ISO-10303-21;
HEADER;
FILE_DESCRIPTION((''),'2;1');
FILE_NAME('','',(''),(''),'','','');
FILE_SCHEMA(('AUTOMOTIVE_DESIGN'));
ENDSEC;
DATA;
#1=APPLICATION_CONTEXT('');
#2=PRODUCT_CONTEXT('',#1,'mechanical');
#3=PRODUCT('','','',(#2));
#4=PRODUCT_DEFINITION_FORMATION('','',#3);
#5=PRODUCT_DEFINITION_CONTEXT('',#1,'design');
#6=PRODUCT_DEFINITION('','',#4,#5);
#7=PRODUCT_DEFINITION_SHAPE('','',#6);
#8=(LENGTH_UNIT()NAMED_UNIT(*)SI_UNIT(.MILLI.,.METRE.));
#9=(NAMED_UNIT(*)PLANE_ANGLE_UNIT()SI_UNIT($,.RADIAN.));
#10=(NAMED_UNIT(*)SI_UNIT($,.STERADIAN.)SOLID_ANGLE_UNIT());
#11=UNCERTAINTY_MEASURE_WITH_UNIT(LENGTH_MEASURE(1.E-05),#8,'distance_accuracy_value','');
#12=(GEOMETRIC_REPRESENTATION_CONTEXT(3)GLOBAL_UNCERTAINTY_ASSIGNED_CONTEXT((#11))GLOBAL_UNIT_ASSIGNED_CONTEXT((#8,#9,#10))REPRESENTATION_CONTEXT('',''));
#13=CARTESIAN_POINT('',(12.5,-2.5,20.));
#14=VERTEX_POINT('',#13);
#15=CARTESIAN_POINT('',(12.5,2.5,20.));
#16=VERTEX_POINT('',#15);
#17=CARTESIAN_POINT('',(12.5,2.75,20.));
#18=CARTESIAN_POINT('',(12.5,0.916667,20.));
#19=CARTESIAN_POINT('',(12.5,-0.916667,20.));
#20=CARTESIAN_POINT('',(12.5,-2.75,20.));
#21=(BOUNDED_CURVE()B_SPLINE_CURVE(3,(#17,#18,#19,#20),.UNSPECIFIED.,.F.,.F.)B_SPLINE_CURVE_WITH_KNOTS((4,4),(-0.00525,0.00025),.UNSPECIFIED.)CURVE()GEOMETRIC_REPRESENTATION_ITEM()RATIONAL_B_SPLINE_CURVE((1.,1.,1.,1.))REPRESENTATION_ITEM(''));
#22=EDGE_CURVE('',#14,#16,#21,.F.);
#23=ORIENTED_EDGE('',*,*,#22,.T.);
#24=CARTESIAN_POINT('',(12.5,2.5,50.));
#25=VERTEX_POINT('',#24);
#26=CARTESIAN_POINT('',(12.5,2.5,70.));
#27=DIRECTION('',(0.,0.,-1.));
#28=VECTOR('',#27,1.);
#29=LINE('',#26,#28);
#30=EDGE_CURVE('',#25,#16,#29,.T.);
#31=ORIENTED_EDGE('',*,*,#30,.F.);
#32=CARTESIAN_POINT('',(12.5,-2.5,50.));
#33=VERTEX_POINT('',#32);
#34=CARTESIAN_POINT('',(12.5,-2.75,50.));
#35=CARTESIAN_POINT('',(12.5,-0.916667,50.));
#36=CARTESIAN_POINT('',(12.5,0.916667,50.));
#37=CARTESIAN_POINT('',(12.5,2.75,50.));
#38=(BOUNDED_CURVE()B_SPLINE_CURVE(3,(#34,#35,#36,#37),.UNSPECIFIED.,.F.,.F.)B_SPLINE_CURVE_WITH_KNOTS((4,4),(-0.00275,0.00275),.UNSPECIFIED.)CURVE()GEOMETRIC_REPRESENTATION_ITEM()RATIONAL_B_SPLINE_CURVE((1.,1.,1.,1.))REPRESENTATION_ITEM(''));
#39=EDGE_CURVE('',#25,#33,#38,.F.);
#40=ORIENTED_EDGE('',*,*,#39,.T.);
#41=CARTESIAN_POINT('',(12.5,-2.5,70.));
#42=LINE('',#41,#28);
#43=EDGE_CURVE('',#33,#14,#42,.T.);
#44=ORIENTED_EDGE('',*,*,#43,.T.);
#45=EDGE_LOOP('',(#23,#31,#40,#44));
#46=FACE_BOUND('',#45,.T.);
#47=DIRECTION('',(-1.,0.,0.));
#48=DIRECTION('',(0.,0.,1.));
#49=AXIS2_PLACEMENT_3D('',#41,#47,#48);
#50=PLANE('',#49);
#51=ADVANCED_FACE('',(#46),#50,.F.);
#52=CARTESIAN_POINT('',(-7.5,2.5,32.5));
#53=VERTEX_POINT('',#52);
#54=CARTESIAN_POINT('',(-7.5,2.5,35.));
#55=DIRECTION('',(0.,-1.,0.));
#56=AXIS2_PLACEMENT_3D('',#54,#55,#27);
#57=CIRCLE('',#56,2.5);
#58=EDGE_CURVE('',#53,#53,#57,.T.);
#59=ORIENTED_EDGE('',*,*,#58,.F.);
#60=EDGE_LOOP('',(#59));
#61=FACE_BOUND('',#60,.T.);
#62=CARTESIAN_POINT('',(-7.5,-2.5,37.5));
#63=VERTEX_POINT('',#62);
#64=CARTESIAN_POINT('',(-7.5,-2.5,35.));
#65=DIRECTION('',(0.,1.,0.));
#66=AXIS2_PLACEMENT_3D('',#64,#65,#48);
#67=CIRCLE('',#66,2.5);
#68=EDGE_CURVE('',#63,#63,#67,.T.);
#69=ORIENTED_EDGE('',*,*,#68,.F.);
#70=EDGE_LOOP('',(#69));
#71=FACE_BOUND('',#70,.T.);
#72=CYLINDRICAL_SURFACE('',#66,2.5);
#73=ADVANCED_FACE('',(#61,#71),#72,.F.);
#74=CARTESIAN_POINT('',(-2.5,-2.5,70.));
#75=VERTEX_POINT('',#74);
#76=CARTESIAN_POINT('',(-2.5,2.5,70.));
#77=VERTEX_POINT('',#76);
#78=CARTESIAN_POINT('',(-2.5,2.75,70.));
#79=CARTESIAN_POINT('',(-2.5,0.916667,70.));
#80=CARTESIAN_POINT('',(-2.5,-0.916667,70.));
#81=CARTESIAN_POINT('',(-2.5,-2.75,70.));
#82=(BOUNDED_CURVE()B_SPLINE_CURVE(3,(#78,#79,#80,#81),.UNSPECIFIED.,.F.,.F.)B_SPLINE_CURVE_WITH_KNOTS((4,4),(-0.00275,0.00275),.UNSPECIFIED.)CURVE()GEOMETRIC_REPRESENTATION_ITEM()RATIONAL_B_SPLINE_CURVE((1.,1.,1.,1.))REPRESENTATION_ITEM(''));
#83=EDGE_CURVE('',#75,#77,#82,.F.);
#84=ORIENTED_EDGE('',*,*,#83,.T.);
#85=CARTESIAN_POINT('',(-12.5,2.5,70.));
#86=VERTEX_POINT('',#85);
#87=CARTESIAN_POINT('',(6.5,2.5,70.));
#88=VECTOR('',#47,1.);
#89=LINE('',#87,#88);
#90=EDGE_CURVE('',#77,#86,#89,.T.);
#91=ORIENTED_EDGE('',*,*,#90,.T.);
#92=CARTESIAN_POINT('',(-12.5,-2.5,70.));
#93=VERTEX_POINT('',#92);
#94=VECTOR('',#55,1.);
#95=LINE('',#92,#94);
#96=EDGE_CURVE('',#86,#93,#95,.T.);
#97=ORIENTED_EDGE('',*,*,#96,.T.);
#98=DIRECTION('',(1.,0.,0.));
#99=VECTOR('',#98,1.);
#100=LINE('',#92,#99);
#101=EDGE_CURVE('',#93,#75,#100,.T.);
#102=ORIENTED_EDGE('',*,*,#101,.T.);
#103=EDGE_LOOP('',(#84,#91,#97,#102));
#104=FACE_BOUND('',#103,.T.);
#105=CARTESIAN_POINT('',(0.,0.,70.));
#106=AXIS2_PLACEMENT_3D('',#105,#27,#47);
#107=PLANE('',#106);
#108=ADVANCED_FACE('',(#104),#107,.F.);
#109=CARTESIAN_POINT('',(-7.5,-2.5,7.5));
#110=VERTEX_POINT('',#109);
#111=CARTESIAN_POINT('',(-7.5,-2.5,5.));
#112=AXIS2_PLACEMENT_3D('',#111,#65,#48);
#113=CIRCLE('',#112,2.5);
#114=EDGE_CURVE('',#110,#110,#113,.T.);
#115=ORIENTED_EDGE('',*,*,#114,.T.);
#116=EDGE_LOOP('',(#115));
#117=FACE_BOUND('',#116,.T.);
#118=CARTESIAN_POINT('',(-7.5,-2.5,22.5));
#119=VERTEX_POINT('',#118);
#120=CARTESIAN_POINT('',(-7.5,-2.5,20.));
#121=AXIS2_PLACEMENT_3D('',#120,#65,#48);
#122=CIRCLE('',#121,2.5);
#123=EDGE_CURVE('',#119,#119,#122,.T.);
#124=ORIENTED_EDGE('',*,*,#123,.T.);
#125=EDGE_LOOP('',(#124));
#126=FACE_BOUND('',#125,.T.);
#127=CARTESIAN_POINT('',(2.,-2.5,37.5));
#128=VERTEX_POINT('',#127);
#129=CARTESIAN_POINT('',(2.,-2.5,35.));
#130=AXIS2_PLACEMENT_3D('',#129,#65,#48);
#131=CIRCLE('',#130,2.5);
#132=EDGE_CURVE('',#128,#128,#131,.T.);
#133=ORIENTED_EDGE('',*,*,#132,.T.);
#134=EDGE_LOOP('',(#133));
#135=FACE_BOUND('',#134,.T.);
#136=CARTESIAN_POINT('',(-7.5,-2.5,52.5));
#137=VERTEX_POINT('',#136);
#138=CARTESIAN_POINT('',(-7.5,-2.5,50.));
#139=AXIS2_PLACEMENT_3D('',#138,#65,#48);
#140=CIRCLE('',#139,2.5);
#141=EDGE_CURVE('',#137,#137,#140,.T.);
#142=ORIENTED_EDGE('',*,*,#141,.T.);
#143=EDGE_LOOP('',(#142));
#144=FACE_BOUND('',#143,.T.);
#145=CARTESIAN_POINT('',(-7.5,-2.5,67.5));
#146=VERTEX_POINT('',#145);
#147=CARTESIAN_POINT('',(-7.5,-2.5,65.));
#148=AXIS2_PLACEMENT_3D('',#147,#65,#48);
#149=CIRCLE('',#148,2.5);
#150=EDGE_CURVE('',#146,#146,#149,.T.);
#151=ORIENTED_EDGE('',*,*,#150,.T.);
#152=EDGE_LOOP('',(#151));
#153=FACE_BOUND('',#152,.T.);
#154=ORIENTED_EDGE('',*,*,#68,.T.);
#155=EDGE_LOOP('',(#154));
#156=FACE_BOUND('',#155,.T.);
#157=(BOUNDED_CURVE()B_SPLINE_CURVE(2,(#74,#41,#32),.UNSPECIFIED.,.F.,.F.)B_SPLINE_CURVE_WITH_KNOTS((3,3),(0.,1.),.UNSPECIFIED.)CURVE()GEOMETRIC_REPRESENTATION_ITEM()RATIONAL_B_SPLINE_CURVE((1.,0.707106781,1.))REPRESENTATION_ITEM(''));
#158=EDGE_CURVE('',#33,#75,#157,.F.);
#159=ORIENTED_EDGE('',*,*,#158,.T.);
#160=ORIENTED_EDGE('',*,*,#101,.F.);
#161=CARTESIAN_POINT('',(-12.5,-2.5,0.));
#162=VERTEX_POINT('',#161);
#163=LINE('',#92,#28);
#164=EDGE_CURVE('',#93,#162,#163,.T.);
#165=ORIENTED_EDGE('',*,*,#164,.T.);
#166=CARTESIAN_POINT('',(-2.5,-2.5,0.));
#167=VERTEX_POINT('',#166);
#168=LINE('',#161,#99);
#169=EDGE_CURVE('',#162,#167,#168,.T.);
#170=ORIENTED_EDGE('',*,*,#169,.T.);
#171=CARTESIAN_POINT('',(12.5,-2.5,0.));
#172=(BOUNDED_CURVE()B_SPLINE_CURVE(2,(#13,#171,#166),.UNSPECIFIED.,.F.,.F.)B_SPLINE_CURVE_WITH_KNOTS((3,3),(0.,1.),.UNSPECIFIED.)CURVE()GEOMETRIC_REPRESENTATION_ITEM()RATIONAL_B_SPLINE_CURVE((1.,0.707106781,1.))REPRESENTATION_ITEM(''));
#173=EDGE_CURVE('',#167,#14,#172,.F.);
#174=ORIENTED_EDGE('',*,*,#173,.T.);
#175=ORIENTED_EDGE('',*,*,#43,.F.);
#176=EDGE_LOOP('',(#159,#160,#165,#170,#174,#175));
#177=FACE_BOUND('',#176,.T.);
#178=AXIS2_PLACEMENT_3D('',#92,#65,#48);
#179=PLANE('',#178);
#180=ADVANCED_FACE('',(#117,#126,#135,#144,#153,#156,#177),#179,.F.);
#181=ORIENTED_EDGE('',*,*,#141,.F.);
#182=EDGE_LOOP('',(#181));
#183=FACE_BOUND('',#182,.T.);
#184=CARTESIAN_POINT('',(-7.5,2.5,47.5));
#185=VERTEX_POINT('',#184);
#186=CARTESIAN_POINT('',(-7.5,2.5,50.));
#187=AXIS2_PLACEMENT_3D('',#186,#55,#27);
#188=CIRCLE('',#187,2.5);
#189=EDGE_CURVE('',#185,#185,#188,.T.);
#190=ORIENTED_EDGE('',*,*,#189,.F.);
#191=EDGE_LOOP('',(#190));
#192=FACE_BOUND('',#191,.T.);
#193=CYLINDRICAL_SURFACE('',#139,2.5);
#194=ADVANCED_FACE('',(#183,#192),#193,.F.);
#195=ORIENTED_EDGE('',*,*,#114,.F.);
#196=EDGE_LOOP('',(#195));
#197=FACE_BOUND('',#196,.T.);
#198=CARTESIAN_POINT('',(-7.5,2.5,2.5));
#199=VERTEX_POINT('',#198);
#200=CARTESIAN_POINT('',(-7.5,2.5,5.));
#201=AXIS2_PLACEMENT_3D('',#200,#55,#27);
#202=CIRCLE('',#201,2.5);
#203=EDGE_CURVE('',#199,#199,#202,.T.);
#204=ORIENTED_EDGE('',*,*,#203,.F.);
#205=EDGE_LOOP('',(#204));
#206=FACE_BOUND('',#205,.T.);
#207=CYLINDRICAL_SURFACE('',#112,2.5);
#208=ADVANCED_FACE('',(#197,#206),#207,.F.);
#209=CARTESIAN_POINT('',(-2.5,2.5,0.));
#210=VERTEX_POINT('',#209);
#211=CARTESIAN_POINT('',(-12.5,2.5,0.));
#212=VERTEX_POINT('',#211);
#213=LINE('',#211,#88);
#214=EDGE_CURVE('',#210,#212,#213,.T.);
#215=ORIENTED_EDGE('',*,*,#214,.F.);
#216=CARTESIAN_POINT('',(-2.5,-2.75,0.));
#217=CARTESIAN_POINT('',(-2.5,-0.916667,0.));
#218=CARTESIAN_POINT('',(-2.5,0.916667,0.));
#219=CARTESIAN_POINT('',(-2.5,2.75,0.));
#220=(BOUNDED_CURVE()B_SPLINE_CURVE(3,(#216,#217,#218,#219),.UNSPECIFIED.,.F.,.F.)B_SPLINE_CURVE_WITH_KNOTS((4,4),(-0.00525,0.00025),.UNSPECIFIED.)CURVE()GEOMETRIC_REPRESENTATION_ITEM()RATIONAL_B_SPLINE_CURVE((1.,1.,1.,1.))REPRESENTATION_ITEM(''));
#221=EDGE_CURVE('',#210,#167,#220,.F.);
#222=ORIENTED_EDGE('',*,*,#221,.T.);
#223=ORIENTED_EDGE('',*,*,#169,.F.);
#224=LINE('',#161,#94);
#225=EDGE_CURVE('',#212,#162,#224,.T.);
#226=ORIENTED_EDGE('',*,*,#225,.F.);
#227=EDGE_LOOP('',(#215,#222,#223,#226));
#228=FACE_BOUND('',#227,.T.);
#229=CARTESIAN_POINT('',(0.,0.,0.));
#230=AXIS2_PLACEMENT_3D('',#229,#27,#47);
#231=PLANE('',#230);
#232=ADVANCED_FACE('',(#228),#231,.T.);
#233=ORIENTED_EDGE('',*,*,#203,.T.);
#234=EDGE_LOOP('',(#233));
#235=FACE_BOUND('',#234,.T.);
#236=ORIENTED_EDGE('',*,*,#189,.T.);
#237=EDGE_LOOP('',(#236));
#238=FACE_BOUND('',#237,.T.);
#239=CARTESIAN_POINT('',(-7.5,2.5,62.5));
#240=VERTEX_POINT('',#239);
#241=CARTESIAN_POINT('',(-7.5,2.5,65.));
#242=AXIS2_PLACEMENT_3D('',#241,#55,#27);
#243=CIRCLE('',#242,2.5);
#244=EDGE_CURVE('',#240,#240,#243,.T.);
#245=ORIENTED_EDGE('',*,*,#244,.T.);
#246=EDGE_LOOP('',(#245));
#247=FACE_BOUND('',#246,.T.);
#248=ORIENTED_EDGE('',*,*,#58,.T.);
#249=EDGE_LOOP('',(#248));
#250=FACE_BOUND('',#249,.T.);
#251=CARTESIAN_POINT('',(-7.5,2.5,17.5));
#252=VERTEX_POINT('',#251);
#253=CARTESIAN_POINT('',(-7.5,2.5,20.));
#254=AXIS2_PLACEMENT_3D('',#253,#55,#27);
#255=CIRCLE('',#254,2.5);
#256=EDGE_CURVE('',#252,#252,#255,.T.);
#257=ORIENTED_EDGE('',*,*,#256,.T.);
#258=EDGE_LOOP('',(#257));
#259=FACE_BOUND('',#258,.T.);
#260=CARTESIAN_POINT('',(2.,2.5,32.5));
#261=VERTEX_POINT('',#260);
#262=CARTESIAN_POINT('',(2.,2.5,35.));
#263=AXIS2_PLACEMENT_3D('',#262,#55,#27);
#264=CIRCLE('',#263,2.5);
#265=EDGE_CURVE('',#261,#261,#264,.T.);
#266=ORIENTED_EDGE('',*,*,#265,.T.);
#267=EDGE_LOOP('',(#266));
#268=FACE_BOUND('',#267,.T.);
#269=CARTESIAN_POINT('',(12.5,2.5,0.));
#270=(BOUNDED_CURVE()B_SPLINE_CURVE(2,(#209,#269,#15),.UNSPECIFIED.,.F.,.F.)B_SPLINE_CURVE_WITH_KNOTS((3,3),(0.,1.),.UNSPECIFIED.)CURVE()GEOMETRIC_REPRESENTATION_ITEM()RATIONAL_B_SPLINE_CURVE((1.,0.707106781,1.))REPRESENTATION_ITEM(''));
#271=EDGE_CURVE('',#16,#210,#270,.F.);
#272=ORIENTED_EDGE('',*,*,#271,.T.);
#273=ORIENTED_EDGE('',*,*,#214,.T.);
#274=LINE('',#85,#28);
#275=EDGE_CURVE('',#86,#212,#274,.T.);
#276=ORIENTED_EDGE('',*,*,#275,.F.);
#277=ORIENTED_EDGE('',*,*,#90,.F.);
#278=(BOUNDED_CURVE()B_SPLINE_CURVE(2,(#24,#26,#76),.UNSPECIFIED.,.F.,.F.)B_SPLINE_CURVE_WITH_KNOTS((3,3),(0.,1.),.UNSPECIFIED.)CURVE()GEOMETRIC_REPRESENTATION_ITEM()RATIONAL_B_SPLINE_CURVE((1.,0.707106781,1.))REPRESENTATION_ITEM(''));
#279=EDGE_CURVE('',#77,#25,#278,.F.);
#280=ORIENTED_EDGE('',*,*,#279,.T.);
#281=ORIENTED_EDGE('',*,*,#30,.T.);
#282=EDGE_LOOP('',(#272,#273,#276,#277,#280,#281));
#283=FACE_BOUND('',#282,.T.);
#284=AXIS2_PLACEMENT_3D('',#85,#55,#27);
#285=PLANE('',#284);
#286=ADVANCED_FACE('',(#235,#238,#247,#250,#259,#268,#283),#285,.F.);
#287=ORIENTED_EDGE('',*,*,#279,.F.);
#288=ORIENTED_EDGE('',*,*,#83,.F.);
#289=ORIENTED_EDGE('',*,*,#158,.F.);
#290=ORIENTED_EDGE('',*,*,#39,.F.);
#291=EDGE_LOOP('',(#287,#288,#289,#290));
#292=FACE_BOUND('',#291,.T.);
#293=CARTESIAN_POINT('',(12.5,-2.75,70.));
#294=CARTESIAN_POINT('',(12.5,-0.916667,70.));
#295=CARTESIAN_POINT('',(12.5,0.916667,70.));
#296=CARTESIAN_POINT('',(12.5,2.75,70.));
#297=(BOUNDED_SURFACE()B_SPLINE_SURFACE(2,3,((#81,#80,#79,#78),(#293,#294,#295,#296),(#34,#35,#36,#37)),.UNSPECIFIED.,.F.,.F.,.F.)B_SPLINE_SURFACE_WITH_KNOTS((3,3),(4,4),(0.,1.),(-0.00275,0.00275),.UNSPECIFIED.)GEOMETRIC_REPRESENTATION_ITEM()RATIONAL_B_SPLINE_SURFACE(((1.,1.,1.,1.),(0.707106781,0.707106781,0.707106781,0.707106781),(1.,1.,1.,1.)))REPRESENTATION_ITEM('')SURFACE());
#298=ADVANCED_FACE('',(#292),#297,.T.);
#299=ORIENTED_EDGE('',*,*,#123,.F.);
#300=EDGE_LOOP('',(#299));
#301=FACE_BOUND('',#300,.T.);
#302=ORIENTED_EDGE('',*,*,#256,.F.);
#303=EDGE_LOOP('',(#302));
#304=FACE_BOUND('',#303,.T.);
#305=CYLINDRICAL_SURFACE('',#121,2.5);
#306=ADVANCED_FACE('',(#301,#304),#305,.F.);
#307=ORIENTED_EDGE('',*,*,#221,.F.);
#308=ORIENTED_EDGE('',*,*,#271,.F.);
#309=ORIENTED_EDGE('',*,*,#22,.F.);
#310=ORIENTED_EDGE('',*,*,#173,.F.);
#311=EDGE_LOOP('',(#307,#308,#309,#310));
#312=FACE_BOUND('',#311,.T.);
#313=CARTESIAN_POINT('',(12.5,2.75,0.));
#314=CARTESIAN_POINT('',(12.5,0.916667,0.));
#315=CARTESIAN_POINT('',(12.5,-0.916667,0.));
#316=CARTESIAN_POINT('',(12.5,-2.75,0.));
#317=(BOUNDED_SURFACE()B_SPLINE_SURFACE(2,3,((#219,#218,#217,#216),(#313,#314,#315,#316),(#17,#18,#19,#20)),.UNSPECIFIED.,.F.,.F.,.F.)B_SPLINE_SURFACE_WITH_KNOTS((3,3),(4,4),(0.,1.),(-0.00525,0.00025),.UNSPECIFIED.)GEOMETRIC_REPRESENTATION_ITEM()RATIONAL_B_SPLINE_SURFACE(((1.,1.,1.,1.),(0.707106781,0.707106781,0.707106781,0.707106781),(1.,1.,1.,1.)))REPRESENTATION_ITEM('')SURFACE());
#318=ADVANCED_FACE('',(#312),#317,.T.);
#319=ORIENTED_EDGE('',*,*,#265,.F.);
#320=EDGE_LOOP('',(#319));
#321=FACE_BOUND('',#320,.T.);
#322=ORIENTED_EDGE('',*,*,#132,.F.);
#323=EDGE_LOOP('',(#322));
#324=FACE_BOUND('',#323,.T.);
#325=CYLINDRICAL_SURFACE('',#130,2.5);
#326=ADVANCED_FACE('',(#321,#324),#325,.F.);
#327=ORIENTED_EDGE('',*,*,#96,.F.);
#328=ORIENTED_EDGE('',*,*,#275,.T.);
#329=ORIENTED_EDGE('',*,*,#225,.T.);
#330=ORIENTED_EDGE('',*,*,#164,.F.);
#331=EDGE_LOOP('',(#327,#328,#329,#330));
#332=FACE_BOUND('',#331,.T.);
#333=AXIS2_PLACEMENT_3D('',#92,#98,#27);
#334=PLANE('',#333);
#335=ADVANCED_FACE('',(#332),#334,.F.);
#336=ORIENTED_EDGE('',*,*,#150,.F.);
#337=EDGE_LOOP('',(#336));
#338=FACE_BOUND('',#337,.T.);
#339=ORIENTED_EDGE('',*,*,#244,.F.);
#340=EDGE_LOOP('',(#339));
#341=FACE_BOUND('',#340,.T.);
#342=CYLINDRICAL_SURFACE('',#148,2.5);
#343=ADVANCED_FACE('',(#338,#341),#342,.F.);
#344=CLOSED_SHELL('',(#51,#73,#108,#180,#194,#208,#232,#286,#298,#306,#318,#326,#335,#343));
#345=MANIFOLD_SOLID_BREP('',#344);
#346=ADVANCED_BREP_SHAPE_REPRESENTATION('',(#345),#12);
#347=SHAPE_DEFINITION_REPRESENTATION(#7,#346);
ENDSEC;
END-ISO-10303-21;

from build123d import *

# Parameters (mm, degrees)
BOSS_EXTRUDE1_DEPTH     = 70
CUT_EXTRUDE2_DEPTH      = 72.282887147
CUT_EXTRUDE2_DEPTH_BACK = 72.282887147
SKETCH2_R               = 2.5
FILLET1_SIZE            = 20
FILLET1_SIZE_2          = 15


with BuildPart() as part:
    # Sketch1 → Boss-Extrude1 (new body)
    with BuildSketch(Plane.XY):
        Polygon((6.5, 2.5), (12.5, 2.5), (12.5, -2.5), (-12.5, -2.5), (-12.5, 2.5), align=None)
    extrude(amount=BOSS_EXTRUDE1_DEPTH)

    # Sketch2 → Cut-Extrude2 (cut, two sides: drawn at the far end of the back side and taken through both)
    with BuildSketch(Plane(origin=(0, 2.5, 0), x_dir=(1, 0, 0), z_dir=(0, 1, 0)).offset(-CUT_EXTRUDE2_DEPTH_BACK)):
        with Locations(Location((-7.5, -5, 0), (0, 0, 270))):
            Circle(SKETCH2_R)
        with Locations(Location((-7.5, -20, 0), (0, 0, 270))):
            Circle(SKETCH2_R)
        with Locations(Location((-7.5, -35, 0), (0, 0, 270))):
            Circle(SKETCH2_R)
        with Locations(Location((-7.5, -50, 0), (0, 0, 270))):
            Circle(SKETCH2_R)
        with Locations(Location((-7.5, -65, 0), (0, 0, 270))):
            Circle(SKETCH2_R)
        with Locations(Location((2, -35, 0), (0, 0, 270))):
            Circle(SKETCH2_R)
    extrude(amount=CUT_EXTRUDE2_DEPTH + CUT_EXTRUDE2_DEPTH_BACK, mode=Mode.SUBTRACT)

    # Fillet1
    # an asymmetric fillet: 20, 15 mm, written as the material it takes off along each edge
    with BuildSketch(Plane(origin=(12.5, 52.5, 70), x_dir=(0, 0, -1), z_dir=(0, -1, 0))) as fillet1_piece_1:
        with BuildLine():
            Bezier((FILLET1_SIZE, 0), (0, 0), (0, -FILLET1_SIZE_2), weights=[1, 0.707106781, 1])
            Line((0, -FILLET1_SIZE_2), (0, 0))
            Line((0, 0), (FILLET1_SIZE, 0))
        make_face()
    extrude(amount=105, mode=Mode.SUBTRACT)
    with BuildSketch(Plane(origin=(12.5, 52.5, 0), x_dir=(0, 0, 1), z_dir=(0, -1, 0))) as fillet1_piece_2:
        with BuildLine():
            Bezier((FILLET1_SIZE, 0), (0, 0), (0, FILLET1_SIZE_2), weights=[1, 0.707106781, 1])
            Line((0, FILLET1_SIZE_2), (0, 0))
            Line((0, 0), (FILLET1_SIZE, 0))
        make_face()
    extrude(amount=105, mode=Mode.SUBTRACT)


solid = part.part
